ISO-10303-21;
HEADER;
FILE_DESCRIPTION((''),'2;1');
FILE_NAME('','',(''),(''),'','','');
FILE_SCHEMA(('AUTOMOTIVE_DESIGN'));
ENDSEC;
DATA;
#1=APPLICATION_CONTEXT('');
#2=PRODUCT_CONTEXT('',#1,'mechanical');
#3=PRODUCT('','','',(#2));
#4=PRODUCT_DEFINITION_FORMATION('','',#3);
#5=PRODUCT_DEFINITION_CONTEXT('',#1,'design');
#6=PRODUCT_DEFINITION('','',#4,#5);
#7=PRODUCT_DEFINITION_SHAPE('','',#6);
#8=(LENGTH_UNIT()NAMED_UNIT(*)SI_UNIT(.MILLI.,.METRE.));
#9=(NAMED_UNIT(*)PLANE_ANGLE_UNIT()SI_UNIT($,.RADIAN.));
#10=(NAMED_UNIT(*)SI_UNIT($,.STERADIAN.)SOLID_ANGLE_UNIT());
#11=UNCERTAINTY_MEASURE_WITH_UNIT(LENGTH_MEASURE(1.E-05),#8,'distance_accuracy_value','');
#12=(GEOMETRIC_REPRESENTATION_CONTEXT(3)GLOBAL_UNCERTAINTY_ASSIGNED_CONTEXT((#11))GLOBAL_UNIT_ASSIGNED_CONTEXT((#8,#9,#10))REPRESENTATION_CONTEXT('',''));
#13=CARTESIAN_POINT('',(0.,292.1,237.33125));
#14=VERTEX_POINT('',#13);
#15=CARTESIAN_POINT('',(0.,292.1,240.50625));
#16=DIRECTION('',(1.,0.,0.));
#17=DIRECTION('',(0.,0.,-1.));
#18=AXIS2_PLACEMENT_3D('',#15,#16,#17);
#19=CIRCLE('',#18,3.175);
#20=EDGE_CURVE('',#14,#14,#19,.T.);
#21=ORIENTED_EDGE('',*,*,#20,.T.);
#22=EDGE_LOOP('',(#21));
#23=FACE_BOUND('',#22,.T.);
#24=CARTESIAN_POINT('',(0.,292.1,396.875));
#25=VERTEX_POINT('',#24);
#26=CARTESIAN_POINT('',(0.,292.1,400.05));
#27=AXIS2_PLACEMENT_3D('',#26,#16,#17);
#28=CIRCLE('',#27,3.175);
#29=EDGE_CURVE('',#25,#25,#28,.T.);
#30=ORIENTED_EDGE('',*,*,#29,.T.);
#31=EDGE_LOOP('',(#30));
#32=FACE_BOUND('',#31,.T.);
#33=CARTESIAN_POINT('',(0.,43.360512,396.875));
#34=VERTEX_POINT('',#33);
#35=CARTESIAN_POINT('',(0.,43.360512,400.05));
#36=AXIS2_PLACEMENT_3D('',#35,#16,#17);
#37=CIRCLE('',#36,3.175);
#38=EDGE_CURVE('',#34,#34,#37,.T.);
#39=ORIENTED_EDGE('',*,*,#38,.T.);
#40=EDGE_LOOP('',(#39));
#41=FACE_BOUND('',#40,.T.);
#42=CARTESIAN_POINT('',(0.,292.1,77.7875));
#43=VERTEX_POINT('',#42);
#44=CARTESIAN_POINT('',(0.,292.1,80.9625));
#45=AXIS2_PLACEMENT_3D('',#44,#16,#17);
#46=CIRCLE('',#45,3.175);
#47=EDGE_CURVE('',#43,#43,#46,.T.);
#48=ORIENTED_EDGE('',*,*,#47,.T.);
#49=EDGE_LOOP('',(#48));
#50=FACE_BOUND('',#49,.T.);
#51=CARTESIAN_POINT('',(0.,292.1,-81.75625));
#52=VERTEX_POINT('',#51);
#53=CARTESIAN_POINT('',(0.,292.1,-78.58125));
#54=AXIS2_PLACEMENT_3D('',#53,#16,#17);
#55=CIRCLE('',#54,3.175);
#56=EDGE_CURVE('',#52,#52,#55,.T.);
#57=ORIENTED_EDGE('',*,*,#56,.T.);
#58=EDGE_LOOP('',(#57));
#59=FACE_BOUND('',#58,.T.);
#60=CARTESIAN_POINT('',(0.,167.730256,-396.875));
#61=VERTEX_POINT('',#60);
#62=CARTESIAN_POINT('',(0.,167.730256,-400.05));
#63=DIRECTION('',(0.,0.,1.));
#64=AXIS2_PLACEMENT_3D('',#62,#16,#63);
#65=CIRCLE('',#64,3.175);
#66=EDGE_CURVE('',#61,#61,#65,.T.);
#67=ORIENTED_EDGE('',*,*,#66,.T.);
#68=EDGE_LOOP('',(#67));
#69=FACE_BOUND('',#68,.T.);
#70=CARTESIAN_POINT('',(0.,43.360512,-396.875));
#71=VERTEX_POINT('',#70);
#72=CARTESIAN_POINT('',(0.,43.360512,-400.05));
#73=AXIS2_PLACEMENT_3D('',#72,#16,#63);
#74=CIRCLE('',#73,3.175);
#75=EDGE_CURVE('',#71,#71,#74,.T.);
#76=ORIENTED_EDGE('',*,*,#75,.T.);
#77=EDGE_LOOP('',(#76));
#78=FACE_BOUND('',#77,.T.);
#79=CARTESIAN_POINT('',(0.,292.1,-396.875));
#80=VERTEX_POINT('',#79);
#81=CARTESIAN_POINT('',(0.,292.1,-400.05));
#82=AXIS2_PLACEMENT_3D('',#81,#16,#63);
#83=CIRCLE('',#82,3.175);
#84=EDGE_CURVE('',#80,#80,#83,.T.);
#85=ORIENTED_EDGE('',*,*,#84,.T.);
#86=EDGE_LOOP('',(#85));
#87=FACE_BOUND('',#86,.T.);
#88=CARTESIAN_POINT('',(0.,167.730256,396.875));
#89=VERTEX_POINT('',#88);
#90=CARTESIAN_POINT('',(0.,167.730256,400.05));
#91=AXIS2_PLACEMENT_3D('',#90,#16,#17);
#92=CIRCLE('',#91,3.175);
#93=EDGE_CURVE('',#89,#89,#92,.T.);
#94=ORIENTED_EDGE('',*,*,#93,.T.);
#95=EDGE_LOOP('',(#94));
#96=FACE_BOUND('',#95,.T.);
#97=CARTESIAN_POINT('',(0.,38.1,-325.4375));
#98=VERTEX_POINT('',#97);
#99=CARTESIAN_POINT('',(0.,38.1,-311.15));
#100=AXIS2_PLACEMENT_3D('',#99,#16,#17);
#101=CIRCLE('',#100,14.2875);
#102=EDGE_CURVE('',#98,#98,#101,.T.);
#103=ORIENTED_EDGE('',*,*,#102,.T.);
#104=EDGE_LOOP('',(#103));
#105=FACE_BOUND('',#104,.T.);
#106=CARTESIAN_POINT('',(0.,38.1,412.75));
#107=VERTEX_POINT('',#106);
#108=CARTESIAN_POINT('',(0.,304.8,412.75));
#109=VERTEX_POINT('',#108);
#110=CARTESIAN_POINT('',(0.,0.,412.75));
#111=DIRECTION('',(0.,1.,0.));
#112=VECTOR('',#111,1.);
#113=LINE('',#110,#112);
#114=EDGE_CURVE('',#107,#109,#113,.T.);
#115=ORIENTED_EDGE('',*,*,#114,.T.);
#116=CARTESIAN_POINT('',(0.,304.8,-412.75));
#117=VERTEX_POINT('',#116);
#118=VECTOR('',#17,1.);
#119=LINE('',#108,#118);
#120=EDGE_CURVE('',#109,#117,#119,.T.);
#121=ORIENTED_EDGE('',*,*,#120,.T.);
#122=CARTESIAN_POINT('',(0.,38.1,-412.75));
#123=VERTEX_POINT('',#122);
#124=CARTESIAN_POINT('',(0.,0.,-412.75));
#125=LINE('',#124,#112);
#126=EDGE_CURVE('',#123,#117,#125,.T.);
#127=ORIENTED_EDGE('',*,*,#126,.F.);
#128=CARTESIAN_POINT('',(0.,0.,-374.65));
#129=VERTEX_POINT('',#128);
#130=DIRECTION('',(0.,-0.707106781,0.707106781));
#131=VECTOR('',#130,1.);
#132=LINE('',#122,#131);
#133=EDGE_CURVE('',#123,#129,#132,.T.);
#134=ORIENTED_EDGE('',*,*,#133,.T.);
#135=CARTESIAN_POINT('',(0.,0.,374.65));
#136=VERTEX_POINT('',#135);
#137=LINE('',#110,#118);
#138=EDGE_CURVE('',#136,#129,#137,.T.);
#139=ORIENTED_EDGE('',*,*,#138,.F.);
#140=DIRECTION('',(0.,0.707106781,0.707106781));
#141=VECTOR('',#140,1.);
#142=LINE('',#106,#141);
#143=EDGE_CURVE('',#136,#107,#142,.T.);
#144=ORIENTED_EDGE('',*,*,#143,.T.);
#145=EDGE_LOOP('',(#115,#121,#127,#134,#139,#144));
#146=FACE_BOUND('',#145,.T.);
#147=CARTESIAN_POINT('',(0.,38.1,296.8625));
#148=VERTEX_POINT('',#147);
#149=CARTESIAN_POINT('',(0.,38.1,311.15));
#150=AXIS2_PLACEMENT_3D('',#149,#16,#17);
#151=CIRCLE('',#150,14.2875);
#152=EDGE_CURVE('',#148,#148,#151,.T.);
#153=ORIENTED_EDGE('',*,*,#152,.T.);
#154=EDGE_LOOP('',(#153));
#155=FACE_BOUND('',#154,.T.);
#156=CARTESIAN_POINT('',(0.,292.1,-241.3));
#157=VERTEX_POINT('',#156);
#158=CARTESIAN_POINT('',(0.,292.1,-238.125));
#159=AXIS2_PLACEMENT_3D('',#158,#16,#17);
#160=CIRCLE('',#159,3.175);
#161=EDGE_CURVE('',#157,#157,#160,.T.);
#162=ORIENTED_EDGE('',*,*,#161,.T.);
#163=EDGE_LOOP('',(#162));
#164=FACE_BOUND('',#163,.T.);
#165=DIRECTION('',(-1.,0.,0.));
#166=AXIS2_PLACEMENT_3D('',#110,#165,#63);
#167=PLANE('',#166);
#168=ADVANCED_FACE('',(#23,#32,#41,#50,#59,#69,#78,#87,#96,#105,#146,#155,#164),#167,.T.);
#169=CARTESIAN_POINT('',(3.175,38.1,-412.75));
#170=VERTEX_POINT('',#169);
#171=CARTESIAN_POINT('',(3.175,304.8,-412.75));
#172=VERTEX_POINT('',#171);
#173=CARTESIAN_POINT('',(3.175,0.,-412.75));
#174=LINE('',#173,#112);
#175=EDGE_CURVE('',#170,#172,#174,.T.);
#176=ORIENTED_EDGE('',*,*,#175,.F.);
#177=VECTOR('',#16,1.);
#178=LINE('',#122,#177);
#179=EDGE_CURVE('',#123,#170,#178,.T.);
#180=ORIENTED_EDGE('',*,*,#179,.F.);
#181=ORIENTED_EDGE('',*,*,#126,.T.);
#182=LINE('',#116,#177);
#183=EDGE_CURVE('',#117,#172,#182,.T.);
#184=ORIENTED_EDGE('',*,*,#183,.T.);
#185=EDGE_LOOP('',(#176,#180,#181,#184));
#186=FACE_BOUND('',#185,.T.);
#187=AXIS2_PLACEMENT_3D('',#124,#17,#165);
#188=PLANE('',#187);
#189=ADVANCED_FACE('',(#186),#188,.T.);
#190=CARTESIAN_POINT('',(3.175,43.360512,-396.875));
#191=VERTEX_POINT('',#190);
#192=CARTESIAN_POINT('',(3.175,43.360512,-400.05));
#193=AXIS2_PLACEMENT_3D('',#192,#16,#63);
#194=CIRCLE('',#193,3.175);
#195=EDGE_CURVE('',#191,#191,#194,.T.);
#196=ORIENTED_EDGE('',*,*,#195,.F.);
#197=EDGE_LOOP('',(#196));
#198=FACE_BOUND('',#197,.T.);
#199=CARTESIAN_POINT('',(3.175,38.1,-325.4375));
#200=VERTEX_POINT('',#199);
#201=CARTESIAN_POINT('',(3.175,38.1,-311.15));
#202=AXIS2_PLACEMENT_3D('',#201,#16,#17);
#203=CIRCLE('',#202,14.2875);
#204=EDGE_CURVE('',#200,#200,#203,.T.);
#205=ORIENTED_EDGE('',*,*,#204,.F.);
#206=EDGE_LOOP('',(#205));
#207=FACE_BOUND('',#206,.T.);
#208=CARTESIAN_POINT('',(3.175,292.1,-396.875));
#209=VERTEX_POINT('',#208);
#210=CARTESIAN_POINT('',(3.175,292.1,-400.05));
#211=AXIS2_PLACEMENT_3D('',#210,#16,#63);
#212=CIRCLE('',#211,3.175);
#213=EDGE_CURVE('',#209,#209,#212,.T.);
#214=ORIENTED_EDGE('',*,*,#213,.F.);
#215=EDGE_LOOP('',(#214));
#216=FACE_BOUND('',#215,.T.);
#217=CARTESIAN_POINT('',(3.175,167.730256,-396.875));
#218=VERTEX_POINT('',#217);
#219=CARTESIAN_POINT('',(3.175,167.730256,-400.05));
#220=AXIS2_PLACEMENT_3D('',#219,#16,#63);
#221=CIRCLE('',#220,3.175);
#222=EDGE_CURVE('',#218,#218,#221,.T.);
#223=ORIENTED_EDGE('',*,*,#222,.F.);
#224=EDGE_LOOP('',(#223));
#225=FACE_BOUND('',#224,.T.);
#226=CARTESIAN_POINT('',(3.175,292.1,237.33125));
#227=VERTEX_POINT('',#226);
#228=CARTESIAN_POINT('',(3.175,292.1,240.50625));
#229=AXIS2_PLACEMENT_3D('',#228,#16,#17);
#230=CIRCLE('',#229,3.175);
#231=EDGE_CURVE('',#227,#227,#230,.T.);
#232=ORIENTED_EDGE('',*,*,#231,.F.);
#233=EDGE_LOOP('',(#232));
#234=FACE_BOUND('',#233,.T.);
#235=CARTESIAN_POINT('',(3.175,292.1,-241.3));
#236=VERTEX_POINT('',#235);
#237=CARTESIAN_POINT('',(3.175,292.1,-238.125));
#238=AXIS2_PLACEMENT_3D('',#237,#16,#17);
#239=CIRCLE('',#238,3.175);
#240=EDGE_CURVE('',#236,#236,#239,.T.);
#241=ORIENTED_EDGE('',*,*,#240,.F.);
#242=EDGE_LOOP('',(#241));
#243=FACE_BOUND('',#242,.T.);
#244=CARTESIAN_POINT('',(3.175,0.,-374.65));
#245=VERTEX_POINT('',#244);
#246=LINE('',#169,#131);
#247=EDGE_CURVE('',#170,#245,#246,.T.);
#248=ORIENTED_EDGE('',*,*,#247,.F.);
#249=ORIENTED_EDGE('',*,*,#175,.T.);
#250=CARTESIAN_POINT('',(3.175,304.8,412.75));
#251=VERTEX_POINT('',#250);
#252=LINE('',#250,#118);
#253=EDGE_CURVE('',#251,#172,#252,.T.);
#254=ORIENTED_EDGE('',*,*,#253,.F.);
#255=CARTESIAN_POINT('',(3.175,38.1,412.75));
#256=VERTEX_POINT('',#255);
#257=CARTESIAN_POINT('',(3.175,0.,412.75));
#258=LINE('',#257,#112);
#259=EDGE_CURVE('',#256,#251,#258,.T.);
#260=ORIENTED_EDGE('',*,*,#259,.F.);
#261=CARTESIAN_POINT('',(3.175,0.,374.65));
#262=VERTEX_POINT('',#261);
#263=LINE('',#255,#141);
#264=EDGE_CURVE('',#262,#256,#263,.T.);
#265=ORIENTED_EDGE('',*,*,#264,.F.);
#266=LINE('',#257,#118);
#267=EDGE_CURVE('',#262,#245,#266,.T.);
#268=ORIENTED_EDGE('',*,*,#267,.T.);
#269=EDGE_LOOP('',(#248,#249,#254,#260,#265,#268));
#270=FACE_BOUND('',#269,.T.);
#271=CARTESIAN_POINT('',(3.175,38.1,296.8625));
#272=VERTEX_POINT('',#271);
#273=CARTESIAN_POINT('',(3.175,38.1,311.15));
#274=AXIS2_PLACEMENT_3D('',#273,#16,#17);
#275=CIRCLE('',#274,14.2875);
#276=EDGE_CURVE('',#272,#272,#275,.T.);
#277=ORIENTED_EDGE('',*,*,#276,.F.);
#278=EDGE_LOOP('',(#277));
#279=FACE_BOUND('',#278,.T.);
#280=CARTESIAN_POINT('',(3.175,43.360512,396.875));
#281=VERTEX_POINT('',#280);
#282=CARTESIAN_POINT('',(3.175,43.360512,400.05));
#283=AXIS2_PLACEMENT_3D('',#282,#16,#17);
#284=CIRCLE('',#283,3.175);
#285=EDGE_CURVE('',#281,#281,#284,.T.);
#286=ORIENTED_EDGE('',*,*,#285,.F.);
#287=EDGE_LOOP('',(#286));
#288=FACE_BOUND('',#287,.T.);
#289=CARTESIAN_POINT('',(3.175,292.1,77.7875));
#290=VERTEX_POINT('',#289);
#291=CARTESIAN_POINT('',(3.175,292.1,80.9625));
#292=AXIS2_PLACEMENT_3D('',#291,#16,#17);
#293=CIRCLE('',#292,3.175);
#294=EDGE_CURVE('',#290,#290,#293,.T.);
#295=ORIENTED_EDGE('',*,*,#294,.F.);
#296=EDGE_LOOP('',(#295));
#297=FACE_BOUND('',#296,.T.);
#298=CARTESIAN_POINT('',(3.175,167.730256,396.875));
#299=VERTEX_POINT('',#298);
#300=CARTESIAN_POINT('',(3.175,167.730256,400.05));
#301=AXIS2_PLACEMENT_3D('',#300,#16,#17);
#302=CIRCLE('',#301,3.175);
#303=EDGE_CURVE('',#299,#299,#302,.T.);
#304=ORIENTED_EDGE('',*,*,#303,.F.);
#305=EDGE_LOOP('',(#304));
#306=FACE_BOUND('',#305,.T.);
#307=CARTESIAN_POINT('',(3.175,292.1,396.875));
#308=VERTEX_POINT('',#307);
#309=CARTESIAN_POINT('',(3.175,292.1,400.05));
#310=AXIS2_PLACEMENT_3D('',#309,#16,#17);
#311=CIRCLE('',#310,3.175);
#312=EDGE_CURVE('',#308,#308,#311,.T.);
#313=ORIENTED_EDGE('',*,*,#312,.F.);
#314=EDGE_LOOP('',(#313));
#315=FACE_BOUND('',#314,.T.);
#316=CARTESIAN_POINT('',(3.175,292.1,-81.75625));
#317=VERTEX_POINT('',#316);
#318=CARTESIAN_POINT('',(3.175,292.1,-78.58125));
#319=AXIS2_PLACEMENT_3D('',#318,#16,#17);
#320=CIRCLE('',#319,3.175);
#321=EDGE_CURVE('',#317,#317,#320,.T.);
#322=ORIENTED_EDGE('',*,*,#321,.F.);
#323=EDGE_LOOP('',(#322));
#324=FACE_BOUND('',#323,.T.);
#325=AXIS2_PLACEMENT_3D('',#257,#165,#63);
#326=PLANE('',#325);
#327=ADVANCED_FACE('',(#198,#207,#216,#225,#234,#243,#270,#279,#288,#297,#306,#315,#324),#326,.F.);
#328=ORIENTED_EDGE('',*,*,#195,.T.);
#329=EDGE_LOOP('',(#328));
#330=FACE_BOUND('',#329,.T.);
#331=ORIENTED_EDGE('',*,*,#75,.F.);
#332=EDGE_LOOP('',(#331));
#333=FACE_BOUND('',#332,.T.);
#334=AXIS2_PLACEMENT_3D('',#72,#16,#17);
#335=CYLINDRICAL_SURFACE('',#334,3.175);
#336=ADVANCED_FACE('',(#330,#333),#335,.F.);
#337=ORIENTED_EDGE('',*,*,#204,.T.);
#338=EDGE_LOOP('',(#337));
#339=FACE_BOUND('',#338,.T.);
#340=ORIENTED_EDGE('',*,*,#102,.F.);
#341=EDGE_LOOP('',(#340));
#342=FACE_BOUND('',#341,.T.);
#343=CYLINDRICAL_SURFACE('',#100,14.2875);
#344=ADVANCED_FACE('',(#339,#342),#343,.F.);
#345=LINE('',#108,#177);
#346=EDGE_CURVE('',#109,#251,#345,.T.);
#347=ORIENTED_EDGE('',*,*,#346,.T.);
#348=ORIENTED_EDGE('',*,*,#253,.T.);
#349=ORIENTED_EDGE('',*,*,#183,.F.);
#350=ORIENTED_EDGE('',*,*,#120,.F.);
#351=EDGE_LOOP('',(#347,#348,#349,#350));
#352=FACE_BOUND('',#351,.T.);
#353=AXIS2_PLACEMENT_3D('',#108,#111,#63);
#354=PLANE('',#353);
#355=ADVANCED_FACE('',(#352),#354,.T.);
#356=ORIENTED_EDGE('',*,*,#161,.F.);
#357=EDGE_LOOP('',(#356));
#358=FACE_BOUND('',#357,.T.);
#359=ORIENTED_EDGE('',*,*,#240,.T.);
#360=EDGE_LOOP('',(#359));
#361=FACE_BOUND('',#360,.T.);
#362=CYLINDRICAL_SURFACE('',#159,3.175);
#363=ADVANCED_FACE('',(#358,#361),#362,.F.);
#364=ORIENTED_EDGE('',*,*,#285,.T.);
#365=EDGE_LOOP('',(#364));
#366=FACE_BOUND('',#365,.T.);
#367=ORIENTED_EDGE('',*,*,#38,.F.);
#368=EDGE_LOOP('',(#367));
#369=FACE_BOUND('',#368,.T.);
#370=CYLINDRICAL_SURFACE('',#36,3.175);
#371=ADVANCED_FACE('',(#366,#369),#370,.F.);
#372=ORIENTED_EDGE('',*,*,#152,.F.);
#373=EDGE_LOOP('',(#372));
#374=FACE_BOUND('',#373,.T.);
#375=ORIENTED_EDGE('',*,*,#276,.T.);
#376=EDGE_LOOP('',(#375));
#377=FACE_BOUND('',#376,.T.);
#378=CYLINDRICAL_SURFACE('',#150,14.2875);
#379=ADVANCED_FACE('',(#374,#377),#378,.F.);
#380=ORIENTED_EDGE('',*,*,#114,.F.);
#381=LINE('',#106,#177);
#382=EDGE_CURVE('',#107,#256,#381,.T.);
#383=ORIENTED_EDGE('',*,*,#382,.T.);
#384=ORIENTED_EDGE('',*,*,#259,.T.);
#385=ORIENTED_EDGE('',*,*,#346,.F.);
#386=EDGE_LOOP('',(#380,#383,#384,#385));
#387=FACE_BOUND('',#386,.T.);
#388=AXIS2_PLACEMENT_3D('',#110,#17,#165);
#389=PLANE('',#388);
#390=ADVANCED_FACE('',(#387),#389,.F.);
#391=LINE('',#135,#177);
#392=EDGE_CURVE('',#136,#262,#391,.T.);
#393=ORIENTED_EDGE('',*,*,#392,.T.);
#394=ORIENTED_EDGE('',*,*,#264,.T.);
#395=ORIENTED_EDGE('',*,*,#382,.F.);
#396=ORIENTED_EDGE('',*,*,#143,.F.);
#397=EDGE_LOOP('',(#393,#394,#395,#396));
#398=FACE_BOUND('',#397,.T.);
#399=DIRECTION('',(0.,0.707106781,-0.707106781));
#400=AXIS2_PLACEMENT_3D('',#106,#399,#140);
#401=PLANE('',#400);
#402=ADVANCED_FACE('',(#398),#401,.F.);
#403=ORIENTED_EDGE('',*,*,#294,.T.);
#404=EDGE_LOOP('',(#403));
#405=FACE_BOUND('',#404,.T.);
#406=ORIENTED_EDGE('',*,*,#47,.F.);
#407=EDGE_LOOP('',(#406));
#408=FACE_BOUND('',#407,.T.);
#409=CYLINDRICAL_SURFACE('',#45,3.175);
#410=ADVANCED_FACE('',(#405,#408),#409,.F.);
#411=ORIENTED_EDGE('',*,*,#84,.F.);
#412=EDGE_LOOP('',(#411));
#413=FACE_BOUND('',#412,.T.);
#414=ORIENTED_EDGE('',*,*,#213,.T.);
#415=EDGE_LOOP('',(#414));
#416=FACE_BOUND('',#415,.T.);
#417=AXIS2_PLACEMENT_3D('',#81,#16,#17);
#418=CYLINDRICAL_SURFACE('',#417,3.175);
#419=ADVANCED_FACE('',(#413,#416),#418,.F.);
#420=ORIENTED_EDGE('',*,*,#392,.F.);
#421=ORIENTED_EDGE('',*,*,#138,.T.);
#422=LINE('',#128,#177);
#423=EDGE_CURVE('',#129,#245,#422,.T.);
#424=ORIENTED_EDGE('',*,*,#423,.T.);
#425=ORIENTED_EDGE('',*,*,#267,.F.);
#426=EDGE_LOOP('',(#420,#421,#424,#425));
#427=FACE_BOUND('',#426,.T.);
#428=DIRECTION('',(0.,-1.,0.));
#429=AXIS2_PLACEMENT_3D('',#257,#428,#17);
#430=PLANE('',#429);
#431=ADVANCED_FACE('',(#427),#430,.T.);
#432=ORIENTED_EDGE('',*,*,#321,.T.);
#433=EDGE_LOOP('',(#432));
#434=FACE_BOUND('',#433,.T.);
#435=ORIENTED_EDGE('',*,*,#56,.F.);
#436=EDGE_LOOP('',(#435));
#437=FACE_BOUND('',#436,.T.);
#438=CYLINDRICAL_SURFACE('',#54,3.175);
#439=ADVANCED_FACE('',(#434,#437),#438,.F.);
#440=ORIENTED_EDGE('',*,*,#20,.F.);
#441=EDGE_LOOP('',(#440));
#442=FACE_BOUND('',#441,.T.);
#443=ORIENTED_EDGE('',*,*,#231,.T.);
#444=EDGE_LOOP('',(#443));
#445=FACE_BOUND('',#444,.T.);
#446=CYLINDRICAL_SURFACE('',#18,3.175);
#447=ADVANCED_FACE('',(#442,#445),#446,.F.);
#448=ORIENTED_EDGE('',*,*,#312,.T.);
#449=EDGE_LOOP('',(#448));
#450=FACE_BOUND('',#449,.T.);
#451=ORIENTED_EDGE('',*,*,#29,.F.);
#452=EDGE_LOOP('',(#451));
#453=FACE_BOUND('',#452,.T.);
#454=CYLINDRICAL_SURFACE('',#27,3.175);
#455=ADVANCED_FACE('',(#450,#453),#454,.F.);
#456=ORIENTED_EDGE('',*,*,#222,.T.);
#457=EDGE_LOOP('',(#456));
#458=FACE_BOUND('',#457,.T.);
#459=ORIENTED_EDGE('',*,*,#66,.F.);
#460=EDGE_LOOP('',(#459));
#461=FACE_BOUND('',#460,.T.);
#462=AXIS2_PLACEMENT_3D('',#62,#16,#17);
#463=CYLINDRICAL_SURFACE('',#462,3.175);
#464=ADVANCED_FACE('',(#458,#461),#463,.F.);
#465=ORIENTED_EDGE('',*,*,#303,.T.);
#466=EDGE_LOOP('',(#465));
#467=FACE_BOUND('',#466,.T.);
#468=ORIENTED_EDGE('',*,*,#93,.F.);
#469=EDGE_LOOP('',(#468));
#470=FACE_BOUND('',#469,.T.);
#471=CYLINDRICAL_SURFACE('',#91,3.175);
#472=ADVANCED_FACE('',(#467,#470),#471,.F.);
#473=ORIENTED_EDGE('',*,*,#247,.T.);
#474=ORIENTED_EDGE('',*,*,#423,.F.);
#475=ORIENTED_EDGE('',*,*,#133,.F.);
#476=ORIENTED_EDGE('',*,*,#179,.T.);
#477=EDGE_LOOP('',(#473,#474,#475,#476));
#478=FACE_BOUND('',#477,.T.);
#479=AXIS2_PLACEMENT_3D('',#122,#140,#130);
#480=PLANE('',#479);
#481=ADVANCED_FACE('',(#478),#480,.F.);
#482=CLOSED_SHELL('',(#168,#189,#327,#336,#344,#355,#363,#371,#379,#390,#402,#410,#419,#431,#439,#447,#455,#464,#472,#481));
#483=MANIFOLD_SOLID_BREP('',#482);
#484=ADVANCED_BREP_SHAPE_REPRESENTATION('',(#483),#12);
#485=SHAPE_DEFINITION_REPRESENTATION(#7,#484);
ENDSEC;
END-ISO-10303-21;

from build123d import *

# Parameters (mm, degrees)
SKETCH1_W          = 3.175
SKETCH1_H          = 304.8
BASE_FLANGE1_DEPTH = 412.75
SKETCH6_R          = 14.2875
SKETCH6_R_2        = 3.175
CUT_EXTRUDE1_DEPTH = 514.103969118


# Sheet-metal steps are written as plain solids
with BuildPart() as part:
    # Sketch1 → Base-Flange1 (new, symmetric)
    with BuildSketch(Plane.XY):
        with Locations((1.5875, 152.4)):
            Rectangle(SKETCH1_W, SKETCH1_H)
    extrude(amount=BASE_FLANGE1_DEPTH, both=True)

    # Sketch6 → Cut-Extrude1 (cut, through all)
    with BuildSketch(Plane(origin=(3.175, 0, 0), x_dir=(0, 0, -1), z_dir=(1, 0, 0))):
        with Locations((-311.15, 38.1)):
            Circle(SKETCH6_R)
        with Locations((311.15, 38.1)):
            Circle(SKETCH6_R)
        with Locations((-400.05, 292.1)):
            Circle(SKETCH6_R_2)
        with Locations((-400.05, 167.730256121)):
            Circle(SKETCH6_R_2)
        with Locations((-400.05, 43.360512242)):
            Circle(SKETCH6_R_2)
        with Locations(Location((400.05, 43.360512242, 0), (0, 0, 180))):
            Circle(SKETCH6_R_2)
        with Locations(Location((400.05, 292.1, 0), (0, 0, 180))):
            Circle(SKETCH6_R_2)
        with Locations(Location((400.05, 167.730256121, 0), (0, 0, 180))):
            Circle(SKETCH6_R_2)
        with Locations((-240.50625, 292.1)):
            Circle(SKETCH6_R_2)
        with Locations((-80.9625, 292.1)):
            Circle(SKETCH6_R_2)
        with Locations((78.58125, 292.1)):
            Circle(SKETCH6_R_2)
        with Locations((238.125, 292.1)):
            Circle(SKETCH6_R_2)
        Polygon((-412.75, 38.1), (-374.65, 0), (-412.75, 0), align=None)
        Polygon((412.75, 0), (412.75, 38.1), (374.65, 0), align=None)
    extrude(amount=-CUT_EXTRUDE1_DEPTH, mode=Mode.SUBTRACT)


solid = part.part
